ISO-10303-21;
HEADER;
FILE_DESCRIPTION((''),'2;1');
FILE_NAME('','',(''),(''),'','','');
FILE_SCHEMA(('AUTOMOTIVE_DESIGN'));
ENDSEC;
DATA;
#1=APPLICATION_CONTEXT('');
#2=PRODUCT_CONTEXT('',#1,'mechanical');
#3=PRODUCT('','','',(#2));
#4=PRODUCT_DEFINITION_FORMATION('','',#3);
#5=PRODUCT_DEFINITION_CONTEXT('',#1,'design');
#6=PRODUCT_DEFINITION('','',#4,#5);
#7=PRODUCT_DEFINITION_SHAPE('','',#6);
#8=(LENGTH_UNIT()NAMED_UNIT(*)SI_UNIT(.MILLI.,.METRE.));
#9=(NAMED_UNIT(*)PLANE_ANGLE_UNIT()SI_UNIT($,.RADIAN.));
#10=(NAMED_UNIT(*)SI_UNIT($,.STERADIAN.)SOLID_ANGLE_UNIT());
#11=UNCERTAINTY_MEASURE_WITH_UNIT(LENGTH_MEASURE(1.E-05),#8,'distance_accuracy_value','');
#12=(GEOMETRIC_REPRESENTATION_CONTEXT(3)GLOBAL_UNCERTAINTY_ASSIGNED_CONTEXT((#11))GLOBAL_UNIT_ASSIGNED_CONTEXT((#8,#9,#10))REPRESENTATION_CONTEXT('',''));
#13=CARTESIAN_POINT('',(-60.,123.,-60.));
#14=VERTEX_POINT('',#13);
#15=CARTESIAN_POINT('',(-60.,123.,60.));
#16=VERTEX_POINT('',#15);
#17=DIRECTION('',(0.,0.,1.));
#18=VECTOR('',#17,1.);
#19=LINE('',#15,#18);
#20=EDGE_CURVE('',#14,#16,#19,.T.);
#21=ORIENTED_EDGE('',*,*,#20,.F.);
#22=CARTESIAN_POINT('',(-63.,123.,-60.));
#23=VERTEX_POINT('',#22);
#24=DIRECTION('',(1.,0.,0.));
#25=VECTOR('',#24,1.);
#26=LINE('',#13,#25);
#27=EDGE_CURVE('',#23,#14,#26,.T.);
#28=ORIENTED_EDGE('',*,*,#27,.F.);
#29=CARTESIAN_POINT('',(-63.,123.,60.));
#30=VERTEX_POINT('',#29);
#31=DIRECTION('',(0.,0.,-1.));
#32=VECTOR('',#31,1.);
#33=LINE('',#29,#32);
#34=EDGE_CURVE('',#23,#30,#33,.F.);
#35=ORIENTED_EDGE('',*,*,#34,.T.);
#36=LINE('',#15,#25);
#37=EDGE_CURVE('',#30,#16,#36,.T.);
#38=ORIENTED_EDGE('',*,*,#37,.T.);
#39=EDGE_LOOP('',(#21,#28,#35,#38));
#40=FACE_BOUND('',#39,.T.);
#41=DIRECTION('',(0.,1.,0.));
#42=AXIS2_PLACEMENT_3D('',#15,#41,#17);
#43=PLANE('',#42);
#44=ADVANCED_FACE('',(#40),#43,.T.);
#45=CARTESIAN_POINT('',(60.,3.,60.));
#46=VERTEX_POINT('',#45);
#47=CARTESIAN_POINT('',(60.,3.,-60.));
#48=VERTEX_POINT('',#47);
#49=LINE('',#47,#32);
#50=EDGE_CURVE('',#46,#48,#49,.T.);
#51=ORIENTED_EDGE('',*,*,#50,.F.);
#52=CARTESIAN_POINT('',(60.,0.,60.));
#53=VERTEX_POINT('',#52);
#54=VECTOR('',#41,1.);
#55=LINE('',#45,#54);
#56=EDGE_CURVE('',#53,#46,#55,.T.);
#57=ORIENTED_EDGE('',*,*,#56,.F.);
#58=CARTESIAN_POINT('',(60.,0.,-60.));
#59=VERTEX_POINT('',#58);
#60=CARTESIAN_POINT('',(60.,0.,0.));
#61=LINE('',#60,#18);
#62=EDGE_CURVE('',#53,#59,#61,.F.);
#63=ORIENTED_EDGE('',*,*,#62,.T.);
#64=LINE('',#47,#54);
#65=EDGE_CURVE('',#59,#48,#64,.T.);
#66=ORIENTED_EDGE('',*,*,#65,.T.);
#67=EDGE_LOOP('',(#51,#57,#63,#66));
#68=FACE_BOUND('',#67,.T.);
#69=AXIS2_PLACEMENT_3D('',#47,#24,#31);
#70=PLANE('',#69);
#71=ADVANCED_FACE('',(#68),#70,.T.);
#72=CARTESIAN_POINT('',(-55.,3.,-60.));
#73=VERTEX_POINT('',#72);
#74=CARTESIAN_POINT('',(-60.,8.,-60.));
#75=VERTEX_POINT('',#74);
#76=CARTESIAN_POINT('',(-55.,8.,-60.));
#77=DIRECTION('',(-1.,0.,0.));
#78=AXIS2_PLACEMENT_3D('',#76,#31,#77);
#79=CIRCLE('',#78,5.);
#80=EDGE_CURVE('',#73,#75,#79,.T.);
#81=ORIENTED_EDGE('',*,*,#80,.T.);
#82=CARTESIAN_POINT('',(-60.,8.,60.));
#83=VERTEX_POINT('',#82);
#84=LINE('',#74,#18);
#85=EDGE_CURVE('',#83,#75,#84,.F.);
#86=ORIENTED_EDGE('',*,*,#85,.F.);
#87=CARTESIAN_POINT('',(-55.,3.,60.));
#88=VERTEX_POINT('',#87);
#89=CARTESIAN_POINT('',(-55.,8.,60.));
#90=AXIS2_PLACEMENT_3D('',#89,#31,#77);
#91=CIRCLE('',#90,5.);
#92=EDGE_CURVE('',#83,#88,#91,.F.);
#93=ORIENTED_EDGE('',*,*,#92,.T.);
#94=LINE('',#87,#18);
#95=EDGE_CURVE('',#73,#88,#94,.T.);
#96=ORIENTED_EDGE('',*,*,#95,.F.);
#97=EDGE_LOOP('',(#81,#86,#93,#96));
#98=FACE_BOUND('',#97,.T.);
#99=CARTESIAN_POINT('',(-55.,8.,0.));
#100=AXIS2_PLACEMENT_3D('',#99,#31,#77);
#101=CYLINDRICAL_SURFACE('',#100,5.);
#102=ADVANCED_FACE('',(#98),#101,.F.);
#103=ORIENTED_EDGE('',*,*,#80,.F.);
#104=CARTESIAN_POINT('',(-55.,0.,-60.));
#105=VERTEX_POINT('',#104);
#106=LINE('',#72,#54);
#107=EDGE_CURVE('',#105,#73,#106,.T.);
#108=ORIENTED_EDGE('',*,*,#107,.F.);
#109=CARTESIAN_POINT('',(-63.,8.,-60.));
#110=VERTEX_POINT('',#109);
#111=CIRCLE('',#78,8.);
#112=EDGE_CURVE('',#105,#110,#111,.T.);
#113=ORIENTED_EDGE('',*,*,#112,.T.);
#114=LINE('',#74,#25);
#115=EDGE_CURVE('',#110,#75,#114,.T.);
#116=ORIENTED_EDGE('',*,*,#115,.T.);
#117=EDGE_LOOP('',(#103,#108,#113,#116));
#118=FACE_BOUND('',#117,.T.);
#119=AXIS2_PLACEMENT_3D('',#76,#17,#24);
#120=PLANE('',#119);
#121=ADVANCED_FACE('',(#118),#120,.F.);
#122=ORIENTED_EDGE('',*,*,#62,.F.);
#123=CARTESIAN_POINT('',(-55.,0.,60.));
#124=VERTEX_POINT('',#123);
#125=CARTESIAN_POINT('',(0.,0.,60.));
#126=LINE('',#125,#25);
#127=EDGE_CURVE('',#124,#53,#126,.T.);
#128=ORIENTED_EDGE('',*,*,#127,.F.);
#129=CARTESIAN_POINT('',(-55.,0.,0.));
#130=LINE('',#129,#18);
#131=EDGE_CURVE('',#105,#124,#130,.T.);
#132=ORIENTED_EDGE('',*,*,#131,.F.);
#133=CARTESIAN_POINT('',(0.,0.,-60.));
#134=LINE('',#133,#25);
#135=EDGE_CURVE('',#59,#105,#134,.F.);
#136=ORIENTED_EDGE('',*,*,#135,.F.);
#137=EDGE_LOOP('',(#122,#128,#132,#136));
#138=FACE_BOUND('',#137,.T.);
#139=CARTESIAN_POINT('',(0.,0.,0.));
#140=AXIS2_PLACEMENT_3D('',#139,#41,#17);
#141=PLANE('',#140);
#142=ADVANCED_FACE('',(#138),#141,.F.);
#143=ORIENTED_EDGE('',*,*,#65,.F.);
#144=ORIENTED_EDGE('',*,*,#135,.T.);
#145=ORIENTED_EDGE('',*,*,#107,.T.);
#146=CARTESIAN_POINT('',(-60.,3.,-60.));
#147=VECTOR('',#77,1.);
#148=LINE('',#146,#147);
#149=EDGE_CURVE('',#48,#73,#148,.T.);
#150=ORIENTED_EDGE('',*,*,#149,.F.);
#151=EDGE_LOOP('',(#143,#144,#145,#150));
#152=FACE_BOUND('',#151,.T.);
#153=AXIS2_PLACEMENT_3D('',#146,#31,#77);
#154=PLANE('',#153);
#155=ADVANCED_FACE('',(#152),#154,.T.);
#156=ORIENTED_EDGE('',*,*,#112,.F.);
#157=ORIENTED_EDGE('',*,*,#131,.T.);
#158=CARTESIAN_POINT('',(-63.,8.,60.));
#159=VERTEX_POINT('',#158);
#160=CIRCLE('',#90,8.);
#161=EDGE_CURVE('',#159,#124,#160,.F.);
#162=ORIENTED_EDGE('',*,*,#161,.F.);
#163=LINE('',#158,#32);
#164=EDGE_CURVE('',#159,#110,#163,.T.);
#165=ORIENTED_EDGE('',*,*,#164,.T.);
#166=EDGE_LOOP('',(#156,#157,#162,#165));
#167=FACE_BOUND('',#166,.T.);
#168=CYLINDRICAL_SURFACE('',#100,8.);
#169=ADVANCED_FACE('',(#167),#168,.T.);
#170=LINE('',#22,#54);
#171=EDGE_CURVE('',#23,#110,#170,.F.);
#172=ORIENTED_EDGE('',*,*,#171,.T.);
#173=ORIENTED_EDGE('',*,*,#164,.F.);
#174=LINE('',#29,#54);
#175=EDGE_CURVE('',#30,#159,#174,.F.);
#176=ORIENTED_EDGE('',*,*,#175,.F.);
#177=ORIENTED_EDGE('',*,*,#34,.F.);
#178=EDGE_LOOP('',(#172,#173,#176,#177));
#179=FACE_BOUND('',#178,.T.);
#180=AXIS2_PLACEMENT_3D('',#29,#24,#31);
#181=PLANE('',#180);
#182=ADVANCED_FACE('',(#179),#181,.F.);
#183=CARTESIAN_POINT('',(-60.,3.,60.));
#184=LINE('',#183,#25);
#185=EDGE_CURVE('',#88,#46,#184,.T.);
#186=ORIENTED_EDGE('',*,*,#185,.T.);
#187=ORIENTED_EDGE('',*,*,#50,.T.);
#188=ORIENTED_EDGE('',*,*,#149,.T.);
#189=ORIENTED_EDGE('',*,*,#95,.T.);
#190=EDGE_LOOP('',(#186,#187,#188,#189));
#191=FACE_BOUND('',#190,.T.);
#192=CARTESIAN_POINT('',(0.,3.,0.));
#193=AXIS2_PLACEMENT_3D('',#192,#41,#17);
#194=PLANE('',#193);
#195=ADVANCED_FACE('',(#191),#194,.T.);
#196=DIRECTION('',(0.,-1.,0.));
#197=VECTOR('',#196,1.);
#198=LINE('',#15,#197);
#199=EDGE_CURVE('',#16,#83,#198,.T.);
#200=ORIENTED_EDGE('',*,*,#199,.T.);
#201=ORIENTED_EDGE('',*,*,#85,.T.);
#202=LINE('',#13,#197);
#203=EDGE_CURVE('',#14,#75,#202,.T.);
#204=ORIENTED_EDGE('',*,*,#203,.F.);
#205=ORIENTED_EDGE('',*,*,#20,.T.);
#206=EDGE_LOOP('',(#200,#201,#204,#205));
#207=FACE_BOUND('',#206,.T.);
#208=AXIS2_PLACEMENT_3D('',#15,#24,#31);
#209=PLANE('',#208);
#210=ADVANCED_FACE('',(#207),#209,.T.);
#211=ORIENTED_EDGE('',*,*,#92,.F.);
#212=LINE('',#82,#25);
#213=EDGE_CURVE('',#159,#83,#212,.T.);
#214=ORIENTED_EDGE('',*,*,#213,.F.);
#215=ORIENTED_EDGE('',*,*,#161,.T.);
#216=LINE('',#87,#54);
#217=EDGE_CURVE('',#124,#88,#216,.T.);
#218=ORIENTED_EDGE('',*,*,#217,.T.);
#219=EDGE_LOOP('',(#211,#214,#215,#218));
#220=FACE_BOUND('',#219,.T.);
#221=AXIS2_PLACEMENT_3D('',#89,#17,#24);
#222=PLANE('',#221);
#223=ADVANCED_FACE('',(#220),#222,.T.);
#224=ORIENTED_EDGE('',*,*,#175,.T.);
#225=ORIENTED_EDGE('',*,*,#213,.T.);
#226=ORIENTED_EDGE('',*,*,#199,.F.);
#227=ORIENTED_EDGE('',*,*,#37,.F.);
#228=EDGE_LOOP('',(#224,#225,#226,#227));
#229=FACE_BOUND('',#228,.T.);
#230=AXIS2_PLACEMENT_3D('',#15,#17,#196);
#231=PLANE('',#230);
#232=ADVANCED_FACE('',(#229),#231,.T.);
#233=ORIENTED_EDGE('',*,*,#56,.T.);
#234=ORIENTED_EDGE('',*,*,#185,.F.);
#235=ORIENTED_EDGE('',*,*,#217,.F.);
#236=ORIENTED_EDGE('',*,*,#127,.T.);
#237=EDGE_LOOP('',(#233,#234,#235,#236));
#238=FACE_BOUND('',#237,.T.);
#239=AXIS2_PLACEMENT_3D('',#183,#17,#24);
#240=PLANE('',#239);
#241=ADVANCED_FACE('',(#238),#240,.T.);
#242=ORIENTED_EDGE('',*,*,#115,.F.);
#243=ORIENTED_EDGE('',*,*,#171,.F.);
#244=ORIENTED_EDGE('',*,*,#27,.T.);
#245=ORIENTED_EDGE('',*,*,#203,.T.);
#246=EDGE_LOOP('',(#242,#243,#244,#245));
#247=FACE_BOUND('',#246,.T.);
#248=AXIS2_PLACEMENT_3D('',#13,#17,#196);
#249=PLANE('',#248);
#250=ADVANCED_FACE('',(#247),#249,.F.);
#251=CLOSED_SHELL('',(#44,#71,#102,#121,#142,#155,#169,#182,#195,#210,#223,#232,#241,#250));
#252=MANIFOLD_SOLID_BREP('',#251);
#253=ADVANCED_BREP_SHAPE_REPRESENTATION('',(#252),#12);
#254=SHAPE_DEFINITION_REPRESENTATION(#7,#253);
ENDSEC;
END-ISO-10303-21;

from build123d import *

# Parameters (mm, degrees)
SKETCH1_W              = 120
SKETCH1_H              = 120
BOSS_EXTRUDE1_DEPTH    = 3
SKETCH2_W              = 3
SKETCH2_H              = 120
BOSS_EXTRUDE2_DEPTH    = 123
CONVERT_SOLID2_START   = -60
CONVERT_SOLID2_DEPTH   = 120
CONVERT_SOLID2_2_DEPTH = 120


# Read off the part's stored shape, not the designer's step: Convert-Solid2
with BuildPart() as part:
    # Sketch1 → Boss-Extrude1 (new body)
    with BuildSketch(Plane(origin=(0, 0, 0), x_dir=(1, 0, 0), z_dir=(0, 1, 0))):
        Rectangle(SKETCH1_W, SKETCH1_H)
    extrude(amount=BOSS_EXTRUDE1_DEPTH)

    # Sketch2 → Boss-Extrude2 (add)
    with BuildSketch(Plane.XZ):
        with Locations((-61.5, 0)):
            Rectangle(SKETCH2_W, SKETCH2_H)
    extrude(amount=-BOSS_EXTRUDE2_DEPTH)

    # Convert-Solid2 outline → Convert-Solid2 (cut)
    with BuildSketch(Plane.XY.offset(CONVERT_SOLID2_START)):
        with BuildLine():
            Line((-63, 0), (-55, 0))
            ThreePointArc((-55, 0), (-60.656854249, 2.343145751), (-63, 8))
            Line((-63, 8), (-63, 0))
        make_face()
    extrude(amount=CONVERT_SOLID2_DEPTH, mode=Mode.SUBTRACT)

    # Convert-Solid2 2 outline → Convert-Solid2 2 (add)
    with BuildSketch(Plane.XY.offset(CONVERT_SOLID2_START)):
        with BuildLine():
            Line((-60, 3), (-55, 3))
            ThreePointArc((-55, 3), (-58.535533906, 4.464466094), (-60, 8))
            Line((-60, 8), (-60, 3))
        make_face()
    extrude(amount=CONVERT_SOLID2_2_DEPTH)


solid = part.part
